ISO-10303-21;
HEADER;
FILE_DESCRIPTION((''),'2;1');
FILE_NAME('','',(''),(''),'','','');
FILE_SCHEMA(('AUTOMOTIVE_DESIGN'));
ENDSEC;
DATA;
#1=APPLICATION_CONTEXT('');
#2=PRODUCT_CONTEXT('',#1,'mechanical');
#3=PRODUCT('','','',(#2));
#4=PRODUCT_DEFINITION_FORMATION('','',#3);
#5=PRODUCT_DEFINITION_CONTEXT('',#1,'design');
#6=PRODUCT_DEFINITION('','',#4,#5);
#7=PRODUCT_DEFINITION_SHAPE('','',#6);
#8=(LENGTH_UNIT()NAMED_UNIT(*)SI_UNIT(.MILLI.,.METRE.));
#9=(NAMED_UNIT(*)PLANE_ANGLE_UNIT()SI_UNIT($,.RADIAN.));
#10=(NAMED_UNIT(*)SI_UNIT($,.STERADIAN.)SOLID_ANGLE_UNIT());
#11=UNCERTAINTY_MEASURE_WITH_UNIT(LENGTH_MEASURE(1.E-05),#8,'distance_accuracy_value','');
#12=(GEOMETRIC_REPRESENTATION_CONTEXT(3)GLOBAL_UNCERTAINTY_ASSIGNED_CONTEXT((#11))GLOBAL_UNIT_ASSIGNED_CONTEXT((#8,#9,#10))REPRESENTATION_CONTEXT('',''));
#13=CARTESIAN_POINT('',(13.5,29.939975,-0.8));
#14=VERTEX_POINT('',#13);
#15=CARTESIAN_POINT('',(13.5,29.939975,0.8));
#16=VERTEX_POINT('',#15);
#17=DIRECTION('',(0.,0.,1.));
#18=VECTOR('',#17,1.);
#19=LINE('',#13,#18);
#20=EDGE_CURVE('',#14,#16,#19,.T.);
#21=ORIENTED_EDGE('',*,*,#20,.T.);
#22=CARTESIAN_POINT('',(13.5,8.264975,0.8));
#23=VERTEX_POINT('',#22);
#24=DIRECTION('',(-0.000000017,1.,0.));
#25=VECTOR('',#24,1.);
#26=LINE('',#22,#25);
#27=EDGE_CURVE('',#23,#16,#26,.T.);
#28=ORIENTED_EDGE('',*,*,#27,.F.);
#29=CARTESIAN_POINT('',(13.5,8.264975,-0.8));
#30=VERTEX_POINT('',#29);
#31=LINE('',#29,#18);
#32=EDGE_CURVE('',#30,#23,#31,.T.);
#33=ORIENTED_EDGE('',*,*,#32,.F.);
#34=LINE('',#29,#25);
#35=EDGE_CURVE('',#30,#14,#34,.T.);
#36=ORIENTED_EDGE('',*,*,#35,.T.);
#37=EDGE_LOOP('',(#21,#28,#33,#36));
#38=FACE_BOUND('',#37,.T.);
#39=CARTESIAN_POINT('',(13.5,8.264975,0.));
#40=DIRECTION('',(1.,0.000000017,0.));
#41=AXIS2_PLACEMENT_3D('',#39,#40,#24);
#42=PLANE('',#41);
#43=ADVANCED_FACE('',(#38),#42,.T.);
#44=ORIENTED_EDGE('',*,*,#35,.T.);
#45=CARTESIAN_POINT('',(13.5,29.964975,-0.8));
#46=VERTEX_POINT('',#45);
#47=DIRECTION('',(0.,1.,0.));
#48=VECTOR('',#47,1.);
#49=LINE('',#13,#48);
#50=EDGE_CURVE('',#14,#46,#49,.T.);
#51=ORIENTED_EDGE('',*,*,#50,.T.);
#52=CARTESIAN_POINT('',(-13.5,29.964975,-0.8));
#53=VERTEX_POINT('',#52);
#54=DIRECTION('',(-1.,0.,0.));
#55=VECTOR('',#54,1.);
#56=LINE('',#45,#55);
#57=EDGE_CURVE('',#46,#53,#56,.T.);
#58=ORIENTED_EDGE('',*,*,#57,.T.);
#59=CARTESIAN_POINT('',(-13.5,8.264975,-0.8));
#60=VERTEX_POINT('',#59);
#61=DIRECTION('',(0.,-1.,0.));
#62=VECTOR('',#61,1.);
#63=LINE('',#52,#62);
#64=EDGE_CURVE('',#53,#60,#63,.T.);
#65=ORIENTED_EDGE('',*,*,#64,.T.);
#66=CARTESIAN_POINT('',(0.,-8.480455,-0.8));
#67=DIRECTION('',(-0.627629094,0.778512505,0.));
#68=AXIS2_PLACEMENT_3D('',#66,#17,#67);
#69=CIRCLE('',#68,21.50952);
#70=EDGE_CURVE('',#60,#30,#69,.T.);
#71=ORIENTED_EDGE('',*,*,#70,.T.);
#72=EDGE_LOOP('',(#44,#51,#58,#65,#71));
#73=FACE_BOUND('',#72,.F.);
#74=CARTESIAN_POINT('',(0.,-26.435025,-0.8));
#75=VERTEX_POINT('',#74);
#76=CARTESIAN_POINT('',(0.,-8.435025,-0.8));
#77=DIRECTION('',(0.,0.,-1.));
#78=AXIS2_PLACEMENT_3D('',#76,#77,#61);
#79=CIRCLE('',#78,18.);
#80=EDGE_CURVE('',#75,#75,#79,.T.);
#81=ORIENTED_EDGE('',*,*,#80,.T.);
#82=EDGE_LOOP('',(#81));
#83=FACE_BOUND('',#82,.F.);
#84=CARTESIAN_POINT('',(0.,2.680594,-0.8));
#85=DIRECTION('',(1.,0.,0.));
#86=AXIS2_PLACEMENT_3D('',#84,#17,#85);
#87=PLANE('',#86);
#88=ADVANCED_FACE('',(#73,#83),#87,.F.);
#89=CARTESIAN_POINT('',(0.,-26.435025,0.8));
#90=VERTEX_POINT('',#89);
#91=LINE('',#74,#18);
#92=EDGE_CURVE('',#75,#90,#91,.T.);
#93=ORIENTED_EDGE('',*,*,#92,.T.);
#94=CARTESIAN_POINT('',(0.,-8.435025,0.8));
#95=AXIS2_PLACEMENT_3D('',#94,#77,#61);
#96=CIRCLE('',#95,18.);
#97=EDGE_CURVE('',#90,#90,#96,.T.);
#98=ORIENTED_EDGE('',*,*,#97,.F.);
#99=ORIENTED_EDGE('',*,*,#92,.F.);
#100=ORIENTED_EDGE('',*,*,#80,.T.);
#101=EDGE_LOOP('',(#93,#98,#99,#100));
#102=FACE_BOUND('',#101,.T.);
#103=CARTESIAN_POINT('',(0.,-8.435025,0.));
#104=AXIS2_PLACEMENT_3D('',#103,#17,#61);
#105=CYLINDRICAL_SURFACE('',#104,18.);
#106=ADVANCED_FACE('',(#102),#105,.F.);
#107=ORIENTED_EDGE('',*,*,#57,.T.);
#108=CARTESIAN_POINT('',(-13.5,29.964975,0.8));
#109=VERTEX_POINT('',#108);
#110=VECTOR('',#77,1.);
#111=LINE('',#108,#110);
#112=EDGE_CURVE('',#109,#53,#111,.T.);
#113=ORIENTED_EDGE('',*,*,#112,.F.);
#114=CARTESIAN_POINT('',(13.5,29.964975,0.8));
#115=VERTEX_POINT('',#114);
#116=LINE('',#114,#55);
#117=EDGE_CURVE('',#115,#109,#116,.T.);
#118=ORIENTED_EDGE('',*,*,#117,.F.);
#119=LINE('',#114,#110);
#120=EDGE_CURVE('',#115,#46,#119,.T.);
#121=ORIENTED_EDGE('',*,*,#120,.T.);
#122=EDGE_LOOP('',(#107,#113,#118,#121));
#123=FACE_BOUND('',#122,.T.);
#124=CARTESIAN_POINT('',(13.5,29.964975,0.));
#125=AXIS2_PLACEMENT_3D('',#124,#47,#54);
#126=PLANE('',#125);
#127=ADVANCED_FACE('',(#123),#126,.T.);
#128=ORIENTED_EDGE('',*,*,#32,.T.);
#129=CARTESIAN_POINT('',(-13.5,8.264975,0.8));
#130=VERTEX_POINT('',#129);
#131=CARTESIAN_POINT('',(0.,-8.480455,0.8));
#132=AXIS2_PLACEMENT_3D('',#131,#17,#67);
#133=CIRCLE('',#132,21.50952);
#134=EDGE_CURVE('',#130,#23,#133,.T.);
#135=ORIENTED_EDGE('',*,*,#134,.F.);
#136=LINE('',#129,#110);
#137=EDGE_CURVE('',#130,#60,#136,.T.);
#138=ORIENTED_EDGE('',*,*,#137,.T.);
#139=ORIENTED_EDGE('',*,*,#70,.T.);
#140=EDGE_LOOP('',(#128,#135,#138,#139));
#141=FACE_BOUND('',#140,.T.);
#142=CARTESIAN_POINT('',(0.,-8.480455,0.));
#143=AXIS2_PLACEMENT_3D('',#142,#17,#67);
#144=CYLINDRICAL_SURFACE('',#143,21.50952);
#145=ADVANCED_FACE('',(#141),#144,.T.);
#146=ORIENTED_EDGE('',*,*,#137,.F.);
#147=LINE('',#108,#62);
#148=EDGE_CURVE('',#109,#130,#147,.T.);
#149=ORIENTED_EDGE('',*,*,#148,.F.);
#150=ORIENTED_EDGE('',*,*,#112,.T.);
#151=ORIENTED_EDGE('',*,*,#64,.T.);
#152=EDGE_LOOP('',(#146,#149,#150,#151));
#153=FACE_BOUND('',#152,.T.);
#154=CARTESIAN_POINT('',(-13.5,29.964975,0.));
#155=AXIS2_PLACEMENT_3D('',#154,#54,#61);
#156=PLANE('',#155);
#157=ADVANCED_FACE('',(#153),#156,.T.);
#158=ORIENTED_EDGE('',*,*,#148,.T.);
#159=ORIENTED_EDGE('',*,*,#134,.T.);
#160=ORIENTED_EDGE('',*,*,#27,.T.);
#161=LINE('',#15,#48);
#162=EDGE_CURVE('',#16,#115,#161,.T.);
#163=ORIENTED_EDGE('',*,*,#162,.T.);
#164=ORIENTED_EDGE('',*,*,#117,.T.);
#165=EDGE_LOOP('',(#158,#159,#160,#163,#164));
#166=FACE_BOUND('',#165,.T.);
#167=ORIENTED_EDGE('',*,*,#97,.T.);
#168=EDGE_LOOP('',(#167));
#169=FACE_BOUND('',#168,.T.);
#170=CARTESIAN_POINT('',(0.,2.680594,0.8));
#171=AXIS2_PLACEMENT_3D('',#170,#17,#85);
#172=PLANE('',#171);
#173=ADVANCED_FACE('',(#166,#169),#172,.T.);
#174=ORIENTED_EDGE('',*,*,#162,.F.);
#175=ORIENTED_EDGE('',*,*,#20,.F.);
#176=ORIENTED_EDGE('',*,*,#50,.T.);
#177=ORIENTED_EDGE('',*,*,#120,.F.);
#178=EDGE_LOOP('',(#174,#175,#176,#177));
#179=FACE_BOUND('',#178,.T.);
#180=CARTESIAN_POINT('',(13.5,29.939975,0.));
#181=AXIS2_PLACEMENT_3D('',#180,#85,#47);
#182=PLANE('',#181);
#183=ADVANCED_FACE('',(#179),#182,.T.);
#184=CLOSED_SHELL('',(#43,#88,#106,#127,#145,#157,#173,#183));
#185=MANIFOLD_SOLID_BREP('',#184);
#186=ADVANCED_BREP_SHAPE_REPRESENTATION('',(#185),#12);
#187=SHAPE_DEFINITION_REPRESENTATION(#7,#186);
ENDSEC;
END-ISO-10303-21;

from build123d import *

# Parameters (mm, degrees)
F1_DEPTH = 0.8


# Not quite as in the source:
# - ends of sketch curves that miss each other by under 0.0002 mm in the source are joined


with BuildPart() as f1:
    # F0 (on Top) → F1 (new body, symmetric)
    with BuildSketch(Plane.XY):
        with BuildLine():
            Line((-13.5, 29.939975), (-13.5, 8.264975))
            ThreePointArc((-13.5, 8.264975), (0, -29.989975), (13.500000361, 8.2649754478))
            Line((13.500000361, 8.2649754478), (13.5, 29.939975))
            Line((13.5, 29.939975), (13.5, 29.964975))
            Line((13.5, 29.964975), (13.475, 29.964975))
            Line((13.475, 29.964975), (-13.475, 29.964975))
            Line((-13.475, 29.964975), (-13.5, 29.964975))
            Line((-13.5, 29.964975), (-13.5, 29.939975))
        make_face()
        with BuildLine():
            ThreePointArc((0, 9.564975), (18, -8.435025), (0, -26.435025))
            ThreePointArc((0, -26.435025), (-18, -8.435025), (0, 9.564975))
        make_face(mode=Mode.SUBTRACT)
    extrude(amount=F1_DEPTH, both=True)


solid = f1.part
